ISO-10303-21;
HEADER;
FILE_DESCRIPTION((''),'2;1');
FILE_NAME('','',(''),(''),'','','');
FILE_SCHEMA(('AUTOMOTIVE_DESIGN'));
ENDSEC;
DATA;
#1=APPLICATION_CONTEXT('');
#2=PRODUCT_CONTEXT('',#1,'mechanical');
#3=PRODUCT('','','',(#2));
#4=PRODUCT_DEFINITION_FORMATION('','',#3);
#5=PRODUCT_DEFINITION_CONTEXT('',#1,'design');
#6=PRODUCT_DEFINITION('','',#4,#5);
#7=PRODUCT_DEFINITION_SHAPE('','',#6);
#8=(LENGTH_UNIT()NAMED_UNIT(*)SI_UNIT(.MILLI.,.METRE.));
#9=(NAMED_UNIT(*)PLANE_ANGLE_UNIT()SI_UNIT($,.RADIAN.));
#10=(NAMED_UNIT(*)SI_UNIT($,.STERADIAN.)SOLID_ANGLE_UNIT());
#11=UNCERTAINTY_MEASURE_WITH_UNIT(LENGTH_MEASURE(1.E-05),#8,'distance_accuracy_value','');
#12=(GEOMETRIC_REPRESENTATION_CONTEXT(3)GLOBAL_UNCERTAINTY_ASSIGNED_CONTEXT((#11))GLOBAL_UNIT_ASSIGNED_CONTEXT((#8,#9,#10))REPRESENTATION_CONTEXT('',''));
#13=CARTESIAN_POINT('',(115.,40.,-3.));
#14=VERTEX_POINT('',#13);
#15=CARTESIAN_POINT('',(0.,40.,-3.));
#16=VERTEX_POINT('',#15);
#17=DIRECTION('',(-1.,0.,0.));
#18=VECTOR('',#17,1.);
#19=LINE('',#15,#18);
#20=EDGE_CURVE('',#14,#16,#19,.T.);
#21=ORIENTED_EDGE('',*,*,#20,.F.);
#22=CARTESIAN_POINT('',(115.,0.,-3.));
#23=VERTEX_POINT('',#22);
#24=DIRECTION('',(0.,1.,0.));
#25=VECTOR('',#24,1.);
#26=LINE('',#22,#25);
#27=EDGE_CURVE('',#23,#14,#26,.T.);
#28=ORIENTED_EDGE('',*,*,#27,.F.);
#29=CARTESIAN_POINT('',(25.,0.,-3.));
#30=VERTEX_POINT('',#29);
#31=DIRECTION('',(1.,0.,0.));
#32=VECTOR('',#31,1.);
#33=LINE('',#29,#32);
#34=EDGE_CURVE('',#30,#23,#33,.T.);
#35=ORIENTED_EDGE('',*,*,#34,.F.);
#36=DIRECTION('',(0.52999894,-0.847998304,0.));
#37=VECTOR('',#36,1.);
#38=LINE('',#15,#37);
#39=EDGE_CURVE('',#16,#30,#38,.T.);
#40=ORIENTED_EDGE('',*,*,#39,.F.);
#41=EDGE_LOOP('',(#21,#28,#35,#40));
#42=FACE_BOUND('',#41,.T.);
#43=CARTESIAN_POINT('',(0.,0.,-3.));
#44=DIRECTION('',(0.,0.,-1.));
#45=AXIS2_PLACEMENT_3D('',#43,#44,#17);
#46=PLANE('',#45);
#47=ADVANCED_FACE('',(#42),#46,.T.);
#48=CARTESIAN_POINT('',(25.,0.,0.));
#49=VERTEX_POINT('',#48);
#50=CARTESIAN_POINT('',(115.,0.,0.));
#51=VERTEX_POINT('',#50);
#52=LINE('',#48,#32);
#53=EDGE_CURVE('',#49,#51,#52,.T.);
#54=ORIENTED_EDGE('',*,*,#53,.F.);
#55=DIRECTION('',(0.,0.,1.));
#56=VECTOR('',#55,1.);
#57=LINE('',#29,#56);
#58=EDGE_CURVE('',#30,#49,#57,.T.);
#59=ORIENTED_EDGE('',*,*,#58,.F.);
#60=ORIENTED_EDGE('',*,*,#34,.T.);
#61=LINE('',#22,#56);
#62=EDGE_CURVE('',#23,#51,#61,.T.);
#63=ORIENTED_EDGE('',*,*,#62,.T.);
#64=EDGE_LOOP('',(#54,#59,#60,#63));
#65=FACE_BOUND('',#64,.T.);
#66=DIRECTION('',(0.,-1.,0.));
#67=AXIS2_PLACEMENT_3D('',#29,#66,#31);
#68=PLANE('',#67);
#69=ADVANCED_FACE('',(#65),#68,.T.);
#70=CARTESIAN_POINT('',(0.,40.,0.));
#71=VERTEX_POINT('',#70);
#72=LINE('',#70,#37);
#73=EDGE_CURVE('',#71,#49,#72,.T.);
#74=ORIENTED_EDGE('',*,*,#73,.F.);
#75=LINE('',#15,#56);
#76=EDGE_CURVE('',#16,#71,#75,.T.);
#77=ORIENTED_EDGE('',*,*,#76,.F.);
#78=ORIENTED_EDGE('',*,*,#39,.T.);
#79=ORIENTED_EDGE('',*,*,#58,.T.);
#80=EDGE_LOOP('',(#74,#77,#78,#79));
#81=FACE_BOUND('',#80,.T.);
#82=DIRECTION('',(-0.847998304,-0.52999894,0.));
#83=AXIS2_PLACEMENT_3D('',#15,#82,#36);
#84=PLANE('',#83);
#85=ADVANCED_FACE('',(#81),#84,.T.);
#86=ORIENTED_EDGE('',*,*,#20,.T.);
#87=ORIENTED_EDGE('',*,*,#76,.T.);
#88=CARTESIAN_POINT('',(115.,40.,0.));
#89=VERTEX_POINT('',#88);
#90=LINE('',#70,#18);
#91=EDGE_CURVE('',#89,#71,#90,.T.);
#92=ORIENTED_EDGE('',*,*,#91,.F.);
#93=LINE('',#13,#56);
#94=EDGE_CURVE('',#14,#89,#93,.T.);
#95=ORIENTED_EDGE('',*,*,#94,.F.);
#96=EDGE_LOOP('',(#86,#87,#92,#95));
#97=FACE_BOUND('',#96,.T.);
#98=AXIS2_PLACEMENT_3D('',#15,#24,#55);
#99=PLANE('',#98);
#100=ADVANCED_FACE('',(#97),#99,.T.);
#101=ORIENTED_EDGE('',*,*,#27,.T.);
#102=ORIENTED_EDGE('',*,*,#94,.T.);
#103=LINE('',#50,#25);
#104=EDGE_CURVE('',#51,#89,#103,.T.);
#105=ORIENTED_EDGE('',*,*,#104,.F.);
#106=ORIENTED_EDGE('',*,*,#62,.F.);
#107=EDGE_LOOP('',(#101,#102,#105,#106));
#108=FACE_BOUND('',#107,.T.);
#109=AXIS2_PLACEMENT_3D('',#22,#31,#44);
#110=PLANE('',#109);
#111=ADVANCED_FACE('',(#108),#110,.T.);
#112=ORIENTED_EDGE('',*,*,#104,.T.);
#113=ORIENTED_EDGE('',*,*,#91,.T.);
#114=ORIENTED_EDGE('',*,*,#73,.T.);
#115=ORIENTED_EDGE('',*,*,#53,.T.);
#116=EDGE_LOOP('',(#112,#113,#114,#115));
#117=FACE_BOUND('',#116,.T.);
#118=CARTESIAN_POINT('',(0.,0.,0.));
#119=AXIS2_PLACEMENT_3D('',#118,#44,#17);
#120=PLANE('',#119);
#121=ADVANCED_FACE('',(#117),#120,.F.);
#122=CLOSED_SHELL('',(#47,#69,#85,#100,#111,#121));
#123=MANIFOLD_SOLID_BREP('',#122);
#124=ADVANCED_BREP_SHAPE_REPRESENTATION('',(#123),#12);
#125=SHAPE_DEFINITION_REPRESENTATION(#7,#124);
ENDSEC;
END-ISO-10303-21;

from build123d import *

# Parameters (mm, degrees)
T_LE_DE_BASE_PLI_E1_DEPTH = 3


# Sheet-metal steps are written as plain solids
with BuildPart() as part:
    # Esquisse1 → Tôle de base pliée1 (new body)
    with BuildSketch(Plane.XY):
        Polygon((25, 0), (115, 0), (115, 40), (0, 40), align=None)
    extrude(amount=-T_LE_DE_BASE_PLI_E1_DEPTH)


solid = part.part
